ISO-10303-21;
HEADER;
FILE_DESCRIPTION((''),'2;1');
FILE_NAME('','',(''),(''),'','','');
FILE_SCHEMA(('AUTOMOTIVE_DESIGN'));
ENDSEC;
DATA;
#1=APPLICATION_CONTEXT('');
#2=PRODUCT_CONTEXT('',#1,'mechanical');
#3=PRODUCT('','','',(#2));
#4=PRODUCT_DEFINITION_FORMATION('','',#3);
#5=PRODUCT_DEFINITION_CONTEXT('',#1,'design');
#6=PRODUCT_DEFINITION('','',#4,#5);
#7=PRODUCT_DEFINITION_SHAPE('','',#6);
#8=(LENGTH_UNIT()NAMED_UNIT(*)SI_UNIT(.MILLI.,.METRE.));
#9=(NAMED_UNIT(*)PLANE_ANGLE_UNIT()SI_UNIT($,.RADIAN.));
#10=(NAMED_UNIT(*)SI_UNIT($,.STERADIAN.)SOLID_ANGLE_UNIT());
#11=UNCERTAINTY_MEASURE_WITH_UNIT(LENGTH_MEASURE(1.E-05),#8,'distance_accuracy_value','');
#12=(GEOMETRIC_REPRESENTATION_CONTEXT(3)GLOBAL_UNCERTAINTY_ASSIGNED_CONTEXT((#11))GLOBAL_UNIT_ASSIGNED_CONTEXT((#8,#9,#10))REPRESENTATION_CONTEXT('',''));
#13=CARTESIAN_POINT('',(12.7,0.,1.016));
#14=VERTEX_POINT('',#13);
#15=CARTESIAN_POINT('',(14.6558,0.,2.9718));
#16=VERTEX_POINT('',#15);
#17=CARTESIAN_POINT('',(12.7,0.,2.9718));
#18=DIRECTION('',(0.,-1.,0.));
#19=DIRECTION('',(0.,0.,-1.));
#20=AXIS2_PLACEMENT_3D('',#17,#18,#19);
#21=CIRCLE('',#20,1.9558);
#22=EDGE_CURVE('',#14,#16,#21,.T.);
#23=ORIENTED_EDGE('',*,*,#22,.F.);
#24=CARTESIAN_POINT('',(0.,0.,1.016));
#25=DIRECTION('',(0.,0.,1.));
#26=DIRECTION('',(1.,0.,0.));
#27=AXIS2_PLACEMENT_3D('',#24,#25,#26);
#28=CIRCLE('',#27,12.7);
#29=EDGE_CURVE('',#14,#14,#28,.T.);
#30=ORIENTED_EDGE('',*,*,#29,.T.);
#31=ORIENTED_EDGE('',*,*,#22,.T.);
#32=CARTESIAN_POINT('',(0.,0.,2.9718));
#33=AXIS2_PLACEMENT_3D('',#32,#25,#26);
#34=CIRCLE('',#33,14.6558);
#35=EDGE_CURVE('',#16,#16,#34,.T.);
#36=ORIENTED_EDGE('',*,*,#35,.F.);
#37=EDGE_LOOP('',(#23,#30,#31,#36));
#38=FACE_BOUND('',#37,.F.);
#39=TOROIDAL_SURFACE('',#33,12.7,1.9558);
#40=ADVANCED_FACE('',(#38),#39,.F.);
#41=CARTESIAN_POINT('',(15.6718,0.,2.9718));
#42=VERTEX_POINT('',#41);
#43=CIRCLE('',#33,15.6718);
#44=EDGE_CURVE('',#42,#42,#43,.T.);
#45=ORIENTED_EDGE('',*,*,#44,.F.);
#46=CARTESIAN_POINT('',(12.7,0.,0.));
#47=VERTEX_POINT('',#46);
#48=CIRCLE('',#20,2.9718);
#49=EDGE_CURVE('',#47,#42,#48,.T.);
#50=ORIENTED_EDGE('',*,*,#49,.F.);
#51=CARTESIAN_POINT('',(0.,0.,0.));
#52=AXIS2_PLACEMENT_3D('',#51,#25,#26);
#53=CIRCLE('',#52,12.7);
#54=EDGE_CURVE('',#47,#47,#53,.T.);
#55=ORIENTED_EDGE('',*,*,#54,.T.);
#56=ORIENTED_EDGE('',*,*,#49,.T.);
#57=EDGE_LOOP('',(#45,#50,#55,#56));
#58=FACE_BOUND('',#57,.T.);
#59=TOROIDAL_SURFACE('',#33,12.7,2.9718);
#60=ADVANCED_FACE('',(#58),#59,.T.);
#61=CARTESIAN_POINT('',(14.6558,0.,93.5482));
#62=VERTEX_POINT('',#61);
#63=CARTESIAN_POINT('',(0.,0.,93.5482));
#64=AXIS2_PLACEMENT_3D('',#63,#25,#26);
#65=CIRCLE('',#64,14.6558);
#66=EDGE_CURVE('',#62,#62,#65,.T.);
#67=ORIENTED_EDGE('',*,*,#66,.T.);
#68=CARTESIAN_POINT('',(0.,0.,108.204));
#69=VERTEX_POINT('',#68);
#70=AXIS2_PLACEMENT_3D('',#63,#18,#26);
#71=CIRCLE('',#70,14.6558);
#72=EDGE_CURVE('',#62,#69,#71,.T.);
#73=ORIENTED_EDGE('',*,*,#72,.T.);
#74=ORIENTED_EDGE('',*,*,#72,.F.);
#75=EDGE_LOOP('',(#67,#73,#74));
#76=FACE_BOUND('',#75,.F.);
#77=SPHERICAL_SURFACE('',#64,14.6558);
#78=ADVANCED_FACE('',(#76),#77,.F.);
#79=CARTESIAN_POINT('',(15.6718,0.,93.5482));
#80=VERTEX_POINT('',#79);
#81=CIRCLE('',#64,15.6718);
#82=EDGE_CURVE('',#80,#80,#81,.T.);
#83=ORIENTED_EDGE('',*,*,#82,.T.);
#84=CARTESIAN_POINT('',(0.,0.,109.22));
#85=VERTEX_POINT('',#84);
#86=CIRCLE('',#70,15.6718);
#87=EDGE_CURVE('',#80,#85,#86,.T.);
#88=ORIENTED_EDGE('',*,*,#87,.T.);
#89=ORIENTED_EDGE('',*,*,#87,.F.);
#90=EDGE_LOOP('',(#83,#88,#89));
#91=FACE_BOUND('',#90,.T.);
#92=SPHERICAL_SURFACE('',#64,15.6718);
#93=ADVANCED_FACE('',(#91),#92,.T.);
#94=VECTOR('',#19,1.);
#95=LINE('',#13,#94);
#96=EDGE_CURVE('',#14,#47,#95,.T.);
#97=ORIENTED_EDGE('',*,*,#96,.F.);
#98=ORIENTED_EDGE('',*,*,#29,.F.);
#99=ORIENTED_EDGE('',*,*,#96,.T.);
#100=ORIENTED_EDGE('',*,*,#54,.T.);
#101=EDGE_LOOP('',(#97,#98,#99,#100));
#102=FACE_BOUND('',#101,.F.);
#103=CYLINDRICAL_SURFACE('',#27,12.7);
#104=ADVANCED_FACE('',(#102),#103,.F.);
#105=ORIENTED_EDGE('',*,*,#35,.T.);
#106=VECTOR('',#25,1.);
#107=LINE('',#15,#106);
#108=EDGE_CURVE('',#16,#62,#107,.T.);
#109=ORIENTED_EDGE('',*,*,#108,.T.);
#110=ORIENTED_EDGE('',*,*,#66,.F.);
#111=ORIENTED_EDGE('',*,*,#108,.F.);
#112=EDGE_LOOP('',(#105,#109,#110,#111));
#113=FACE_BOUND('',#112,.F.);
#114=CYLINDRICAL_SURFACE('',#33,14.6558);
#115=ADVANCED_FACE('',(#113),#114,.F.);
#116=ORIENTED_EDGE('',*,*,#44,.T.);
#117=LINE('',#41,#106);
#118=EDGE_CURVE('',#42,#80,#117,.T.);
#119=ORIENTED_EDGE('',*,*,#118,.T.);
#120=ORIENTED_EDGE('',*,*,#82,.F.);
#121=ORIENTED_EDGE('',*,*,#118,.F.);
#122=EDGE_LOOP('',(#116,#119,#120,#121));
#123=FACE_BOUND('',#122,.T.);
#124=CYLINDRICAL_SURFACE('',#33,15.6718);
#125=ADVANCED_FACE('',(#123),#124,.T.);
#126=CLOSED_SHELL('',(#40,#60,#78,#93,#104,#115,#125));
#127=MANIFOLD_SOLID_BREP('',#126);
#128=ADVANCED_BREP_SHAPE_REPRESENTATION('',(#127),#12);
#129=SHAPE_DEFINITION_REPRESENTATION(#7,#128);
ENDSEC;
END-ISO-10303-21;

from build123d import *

# Parameters (mm, degrees)
F2_T = -1.016


# Not quite as in the source:
# - a shell that OpenCascade refuses in one call is made with other operations: the cavity is built on its own and cut out


with BuildPart() as f1:
    # F0 (on Front) → F1 (revolve)
    with BuildSketch(Plane.XZ):
        with BuildLine():
            Line((0, 109.22), (0, 0))
            Line((0, 0), (12.7, 0))
            ThreePointArc((12.7, 0), (14.8013799323, 0.8704200677), (15.6718, 2.9718))
            Line((15.6718, 2.9718), (15.6718, 93.5482))
            ThreePointArc((15.6718, 93.5482), (11.0816360534, 104.6298360534), (0, 109.22))
        make_face()
    revolve(axis=Axis((0, 0, 54.61), (0, 0, 1)))

    # F2: a shell. OpenCascade refuses it in one call, so the cavity is built on its own and cut out:
    # the body offset inwards by the wall thickness, plus a prism from it out through each open face.
    f2_core = offset(f1.part, amount=F2_T, mode=Mode.PRIVATE)
    f2_exits = [f2_core.faces().sort_by_distance(p)[0] for p in [
        (0, 0, 1.016),
    ]]
    add(f2_core, mode=Mode.SUBTRACT)
    extrude(f2_exits, amount=-F2_T, mode=Mode.SUBTRACT)


solid = f1.part
